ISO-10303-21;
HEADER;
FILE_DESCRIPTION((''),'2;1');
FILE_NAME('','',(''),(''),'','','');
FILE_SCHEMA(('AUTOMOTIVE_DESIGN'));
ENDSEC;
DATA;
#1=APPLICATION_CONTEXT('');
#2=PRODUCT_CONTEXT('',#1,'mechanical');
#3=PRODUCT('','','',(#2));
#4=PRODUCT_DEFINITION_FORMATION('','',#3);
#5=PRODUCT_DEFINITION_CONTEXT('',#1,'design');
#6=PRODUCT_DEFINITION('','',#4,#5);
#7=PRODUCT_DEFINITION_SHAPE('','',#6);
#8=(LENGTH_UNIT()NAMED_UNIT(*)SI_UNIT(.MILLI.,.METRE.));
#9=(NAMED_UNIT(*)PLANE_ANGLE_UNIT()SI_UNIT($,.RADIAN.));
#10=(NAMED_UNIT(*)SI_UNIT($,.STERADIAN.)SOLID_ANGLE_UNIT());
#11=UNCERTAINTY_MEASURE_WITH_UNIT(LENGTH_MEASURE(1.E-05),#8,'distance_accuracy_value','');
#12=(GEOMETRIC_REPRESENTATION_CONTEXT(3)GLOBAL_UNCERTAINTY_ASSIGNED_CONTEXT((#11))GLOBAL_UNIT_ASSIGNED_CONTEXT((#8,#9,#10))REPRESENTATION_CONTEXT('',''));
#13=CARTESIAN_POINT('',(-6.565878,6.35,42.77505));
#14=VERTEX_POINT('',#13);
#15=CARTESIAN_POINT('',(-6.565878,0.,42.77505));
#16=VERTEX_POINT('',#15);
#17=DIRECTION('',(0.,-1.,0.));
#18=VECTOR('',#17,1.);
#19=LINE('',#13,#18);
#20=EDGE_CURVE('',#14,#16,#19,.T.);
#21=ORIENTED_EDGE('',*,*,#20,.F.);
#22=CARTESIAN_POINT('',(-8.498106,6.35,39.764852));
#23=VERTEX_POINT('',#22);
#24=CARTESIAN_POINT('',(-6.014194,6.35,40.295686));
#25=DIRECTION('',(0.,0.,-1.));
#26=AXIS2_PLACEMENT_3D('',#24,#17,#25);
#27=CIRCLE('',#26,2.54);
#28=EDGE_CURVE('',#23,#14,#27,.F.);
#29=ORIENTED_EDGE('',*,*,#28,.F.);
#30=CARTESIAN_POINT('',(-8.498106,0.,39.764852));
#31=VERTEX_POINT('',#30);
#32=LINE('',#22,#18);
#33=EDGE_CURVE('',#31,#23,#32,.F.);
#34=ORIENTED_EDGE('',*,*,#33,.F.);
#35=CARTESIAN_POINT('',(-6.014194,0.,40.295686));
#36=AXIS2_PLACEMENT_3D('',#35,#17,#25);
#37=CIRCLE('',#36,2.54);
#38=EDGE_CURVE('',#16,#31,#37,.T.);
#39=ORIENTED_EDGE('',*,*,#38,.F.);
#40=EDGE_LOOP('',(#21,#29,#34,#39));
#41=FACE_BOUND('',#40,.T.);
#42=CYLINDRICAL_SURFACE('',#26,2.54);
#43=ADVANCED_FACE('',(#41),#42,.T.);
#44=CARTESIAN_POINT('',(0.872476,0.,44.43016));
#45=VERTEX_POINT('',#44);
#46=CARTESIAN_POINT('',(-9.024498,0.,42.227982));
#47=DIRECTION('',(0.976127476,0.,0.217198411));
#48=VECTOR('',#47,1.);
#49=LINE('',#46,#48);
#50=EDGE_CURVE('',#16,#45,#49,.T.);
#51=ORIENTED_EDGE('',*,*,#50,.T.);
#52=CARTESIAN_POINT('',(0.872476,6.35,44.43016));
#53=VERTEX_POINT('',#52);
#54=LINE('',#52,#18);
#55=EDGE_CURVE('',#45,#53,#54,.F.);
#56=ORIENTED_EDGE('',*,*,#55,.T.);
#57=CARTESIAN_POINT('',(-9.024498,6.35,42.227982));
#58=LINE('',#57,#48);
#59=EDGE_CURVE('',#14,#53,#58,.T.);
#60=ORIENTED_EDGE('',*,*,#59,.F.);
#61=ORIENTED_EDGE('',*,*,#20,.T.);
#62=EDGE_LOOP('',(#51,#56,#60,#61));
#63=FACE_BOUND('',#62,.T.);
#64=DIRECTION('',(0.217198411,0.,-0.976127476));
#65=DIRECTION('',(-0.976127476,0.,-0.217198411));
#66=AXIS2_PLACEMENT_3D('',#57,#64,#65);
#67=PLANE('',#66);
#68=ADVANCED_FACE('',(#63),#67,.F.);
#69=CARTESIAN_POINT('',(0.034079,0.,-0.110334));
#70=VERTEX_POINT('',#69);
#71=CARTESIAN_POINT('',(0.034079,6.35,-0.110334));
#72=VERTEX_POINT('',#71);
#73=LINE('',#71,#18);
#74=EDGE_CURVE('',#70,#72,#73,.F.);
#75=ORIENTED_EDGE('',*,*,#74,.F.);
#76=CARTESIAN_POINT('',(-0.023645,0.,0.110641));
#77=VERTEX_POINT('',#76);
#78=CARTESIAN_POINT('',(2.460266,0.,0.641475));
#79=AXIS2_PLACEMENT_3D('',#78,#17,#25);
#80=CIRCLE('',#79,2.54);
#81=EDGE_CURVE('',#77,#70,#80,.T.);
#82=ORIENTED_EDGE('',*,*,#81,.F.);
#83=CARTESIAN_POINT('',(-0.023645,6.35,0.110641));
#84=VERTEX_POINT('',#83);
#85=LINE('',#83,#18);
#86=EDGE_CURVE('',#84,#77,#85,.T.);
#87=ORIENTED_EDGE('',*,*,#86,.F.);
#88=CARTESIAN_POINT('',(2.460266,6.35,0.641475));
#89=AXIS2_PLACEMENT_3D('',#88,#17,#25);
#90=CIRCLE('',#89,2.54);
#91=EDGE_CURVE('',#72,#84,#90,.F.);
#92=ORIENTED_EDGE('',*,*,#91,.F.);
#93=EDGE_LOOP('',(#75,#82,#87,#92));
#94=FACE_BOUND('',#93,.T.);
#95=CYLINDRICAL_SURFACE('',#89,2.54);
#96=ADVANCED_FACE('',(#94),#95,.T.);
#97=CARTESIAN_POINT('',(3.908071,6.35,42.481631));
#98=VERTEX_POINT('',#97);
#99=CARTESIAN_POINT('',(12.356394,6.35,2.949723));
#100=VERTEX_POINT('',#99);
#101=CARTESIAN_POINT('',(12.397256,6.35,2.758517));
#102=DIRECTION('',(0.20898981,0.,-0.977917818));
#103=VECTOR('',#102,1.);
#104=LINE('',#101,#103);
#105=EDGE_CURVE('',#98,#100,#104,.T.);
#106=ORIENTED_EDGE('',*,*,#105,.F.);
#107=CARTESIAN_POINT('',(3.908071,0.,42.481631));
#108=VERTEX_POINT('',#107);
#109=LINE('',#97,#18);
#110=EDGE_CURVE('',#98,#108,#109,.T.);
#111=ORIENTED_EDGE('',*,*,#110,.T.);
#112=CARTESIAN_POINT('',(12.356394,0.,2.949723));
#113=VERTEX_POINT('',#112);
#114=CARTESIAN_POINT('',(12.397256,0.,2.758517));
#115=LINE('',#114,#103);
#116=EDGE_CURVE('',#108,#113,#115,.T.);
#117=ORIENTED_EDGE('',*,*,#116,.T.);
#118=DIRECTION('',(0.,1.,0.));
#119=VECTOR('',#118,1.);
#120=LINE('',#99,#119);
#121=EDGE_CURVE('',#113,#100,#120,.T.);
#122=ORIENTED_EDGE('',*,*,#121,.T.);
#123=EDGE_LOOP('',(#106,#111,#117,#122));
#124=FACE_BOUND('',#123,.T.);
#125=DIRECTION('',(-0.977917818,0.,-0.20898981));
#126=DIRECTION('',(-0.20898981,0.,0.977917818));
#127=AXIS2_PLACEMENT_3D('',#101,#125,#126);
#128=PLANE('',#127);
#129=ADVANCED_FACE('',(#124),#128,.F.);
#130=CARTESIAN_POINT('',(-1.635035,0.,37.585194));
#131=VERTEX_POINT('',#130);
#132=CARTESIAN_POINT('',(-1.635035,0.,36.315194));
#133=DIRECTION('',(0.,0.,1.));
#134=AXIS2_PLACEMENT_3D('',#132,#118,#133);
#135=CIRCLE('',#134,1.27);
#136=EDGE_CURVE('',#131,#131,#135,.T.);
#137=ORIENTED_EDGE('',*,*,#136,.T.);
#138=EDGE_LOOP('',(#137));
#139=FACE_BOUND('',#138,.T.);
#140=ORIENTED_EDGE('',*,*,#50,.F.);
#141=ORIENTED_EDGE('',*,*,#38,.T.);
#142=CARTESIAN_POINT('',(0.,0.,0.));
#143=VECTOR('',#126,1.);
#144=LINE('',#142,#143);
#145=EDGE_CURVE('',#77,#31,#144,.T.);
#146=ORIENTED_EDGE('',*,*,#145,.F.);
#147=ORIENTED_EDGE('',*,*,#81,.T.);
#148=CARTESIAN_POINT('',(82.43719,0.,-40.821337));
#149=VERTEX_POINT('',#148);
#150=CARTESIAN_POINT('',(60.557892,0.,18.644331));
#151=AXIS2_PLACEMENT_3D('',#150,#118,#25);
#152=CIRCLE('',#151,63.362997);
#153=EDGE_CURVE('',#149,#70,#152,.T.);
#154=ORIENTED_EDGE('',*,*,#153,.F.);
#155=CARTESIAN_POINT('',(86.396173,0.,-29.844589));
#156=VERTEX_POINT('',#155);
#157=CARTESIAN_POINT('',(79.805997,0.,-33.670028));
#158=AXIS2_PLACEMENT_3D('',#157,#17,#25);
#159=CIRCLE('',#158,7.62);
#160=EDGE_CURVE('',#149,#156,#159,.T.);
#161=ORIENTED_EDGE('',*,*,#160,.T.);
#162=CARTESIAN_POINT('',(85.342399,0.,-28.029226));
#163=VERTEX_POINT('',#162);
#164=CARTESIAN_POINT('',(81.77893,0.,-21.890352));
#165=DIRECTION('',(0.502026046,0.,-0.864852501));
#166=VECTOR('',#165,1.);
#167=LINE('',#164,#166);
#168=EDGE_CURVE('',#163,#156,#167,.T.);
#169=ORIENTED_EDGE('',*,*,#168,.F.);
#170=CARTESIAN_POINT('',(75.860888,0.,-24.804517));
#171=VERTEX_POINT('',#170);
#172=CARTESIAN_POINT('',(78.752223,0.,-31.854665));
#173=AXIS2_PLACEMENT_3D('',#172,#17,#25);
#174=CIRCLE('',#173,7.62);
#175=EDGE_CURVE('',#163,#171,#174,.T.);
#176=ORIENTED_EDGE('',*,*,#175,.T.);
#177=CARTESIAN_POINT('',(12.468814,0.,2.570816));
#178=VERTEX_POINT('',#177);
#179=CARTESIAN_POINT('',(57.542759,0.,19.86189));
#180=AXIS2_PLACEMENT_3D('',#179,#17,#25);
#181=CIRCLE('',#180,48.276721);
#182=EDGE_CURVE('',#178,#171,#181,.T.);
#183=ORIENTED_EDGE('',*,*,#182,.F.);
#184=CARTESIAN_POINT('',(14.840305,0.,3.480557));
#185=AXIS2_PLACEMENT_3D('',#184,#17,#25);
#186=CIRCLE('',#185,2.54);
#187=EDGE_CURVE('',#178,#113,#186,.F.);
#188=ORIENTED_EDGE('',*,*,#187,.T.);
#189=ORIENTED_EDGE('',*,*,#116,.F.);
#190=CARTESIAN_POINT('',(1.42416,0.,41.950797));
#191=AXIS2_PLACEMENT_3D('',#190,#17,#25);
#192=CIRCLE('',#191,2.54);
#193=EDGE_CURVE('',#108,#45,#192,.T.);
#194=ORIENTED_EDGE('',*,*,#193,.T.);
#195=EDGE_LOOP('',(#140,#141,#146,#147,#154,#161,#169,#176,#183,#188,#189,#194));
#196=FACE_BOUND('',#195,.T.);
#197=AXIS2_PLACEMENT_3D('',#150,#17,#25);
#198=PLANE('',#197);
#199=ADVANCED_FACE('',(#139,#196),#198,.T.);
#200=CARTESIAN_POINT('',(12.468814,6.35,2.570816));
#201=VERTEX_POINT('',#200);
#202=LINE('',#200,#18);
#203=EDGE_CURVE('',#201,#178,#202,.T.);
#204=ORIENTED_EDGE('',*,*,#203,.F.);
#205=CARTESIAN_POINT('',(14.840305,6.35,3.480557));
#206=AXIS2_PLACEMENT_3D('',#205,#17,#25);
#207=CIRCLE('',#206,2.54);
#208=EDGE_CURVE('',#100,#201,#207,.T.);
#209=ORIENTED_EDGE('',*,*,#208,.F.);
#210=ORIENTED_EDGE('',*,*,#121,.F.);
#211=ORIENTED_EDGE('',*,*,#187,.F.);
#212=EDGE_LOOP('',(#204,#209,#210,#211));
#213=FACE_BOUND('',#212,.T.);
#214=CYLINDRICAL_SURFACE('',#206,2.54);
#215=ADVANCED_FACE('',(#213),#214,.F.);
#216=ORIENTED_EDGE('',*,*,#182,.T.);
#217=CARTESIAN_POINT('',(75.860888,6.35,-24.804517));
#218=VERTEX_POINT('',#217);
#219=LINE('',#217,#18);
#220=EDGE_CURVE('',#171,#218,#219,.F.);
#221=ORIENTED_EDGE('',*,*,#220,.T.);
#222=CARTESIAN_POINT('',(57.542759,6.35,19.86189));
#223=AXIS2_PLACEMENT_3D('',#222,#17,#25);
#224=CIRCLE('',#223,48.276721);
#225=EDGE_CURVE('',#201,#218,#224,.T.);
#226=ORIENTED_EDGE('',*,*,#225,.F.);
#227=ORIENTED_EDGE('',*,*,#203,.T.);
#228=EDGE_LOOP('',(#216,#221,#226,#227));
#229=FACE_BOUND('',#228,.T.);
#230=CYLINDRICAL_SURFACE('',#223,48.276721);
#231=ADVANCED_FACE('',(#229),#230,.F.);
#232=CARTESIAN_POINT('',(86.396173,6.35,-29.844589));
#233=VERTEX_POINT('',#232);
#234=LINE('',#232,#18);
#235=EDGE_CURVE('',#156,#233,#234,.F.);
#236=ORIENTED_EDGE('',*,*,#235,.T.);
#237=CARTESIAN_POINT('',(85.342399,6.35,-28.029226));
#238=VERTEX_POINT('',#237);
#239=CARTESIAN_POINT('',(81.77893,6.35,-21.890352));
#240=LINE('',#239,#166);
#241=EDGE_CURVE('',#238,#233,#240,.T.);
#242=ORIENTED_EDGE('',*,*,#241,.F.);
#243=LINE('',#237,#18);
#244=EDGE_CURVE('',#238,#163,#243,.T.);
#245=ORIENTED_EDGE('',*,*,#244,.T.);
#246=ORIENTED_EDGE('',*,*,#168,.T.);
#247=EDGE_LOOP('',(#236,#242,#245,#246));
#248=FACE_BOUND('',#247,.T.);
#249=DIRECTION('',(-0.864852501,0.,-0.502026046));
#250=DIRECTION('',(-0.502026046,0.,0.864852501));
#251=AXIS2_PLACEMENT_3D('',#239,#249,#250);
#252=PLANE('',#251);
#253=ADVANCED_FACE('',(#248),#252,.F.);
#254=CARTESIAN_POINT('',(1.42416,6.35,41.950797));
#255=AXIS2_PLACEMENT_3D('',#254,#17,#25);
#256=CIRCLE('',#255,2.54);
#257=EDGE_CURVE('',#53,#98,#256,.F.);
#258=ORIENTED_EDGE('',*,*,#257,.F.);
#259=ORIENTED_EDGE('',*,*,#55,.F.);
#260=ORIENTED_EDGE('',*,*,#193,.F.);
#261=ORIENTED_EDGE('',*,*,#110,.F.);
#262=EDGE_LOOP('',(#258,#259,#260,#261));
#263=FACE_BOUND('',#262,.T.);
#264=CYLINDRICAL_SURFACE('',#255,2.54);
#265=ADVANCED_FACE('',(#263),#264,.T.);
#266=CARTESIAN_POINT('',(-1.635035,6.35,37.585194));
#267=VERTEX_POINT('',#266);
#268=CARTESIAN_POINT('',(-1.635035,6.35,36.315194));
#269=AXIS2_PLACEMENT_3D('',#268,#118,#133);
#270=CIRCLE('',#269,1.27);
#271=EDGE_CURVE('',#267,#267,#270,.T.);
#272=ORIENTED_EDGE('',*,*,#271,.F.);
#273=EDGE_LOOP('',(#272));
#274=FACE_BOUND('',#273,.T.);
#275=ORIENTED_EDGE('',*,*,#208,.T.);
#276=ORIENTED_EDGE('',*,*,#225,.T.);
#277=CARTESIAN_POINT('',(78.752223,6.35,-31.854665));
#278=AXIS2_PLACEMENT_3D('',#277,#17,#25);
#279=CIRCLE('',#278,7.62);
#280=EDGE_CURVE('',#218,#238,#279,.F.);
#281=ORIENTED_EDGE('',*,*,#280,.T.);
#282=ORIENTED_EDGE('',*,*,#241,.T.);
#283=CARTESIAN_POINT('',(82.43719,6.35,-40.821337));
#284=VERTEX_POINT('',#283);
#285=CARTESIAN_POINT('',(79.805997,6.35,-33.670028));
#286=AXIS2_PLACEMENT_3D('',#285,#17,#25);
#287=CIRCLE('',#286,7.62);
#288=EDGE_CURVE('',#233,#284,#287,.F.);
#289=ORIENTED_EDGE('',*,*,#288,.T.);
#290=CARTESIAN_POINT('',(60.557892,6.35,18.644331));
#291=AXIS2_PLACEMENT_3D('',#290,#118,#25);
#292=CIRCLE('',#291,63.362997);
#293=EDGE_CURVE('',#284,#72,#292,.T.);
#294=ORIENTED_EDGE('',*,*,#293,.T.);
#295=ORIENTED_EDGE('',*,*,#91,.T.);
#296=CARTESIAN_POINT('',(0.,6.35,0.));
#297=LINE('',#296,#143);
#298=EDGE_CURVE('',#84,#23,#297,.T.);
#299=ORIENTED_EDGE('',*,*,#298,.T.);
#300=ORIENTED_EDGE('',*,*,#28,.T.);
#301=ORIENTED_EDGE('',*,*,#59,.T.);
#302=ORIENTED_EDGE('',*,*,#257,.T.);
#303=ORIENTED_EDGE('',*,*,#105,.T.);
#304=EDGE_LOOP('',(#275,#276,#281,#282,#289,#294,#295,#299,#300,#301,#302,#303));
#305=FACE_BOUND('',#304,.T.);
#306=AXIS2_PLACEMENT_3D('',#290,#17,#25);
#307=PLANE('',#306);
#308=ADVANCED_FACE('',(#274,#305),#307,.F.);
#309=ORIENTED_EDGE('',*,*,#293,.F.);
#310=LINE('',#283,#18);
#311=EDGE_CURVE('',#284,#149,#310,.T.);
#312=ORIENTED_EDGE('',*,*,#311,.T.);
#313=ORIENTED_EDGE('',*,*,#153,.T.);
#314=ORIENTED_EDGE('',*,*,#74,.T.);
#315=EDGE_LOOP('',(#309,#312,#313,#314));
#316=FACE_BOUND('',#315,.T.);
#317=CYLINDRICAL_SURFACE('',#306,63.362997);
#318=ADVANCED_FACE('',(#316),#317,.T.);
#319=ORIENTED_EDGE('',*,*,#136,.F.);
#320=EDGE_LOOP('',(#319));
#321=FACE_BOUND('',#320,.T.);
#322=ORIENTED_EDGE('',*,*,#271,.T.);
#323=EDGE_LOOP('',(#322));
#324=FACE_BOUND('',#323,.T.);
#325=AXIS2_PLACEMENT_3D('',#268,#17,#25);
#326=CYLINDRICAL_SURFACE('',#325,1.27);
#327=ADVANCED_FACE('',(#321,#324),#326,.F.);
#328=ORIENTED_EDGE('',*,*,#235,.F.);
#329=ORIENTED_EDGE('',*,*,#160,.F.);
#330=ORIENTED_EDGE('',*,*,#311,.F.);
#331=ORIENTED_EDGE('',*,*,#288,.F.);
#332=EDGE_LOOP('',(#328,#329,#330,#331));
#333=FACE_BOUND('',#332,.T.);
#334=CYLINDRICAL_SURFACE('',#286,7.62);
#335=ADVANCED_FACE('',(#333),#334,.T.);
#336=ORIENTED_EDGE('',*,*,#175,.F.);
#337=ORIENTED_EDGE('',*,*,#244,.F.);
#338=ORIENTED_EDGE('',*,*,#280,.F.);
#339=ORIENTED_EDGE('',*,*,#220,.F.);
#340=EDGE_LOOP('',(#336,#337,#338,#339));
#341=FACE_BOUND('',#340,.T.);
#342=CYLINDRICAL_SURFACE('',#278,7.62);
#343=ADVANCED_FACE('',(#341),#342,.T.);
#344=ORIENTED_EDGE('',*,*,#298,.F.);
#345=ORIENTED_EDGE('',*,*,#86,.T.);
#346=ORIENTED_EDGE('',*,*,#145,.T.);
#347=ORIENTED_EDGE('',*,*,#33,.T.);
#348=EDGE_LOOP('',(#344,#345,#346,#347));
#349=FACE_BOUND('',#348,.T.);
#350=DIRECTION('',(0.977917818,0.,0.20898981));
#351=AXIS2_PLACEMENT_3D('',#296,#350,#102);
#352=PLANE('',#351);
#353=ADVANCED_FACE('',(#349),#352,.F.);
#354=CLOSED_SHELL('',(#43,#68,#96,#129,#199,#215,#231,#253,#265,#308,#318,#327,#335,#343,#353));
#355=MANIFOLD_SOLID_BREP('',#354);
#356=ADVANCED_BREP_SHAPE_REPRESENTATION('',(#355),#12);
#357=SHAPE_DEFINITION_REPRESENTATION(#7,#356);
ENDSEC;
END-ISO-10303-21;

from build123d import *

# Parameters (mm, degrees)
SKETCH1_R           = 1.27
BOSS_EXTRUDE1_DEPTH = 6.35
FILLET1_R           = 7.62
FILLET2_R           = 2.54


with BuildPart() as part:
    # Sketch1 → Boss-Extrude1 (new body)
    with BuildSketch(Plane(origin=(0, 0, 0), x_dir=(1, 0, 0), z_dir=(0, 1, 0))):
        with BuildLine():
            Line((81.778930412, 21.890352424), (90.625383348, 37.130352424))
            ThreePointArc((90.625383348, 37.130352424), (36.535362906, 39.988317454), (0, 0))
            Line((0, 0), (-9.024498495, -42.227981756))
            Line((-9.024498495, -42.227981756), (3.372757994, -44.986498939))
            Line((3.372757994, -44.986498939), (12.397256489, -2.758517182))
            ThreePointArc((12.397256489, -2.758517182), (41.38133196, 25.629318142), (81.778930412, 21.890352424))
        make_face()
        with Locations(Location((-1.635035265, -36.315193683, 0), (0, 0, 270))):
            Circle(SKETCH1_R, mode=Mode.SUBTRACT)
    extrude(amount=BOSS_EXTRUDE1_DEPTH)

    # Fillet1
    fillet1_edges = [part.edges().sort_by_distance(p)[0] for p in [
        (90.625383348, 3.175, -37.130352424),
        (81.778930412, 3.175, -21.890352424),
    ]]
    fillet(fillet1_edges, radius=FILLET1_R)

    # Fillet2
    # the kernel refuses this fillet: 2.54 mm, written as the material it adds along each edge
    with BuildSketch(Plane(origin=(12.397256489, 0, 2.758517182), x_dir=(0.35622264546587595, 0, -0.9344011059803455), z_dir=(0, 1, 0))) as fillet2_piece_1:
        with BuildLine():
            CenterArc((0.195594606, -2.539994503), FILLET2_R, 89.880796264, 8.924440748)
            Line((-0.193218847, -0.029929942), (0, 0))
            ThreePointArc((0, 0), (0.100439533, 0.000104482), (0.200879066, 0))
        make_face()
    extrude(amount=6.35)
    # the kernel refuses this fillet: 2.54 mm, written as the material it takes off along each edge
    with BuildSketch(Plane(origin=(3.372757994, -6.403575534, 44.986498939), x_dir=(0.20898980989256036, 0, -0.9779178183063603), z_dir=(0, 1, 0))) as fillet2_2_piece_1:
        with BuildLine():
            CenterArc((FILLET2_R * 1.00843709196, FILLET2_R), FILLET2_R, 179.518623791, 90.481376209)
            Line((FILLET2_R * 0.00847238518745, FILLET2_R * 1.00840150095), (0, 0))
            Line((0, 0), (FILLET2_R * 1.00843709196, 0))
        make_face()
    extrude(amount=19.157151068, mode=Mode.SUBTRACT)
    with BuildSketch(Plane(origin=(-9.024498495, -6.296872706, 42.227981756), x_dir=(0.20898980989255983, 0, -0.9779178183063605), z_dir=(0, 1, 0))) as fillet2_2_piece_2:
        with BuildLine():
            CenterArc((FILLET2_R * 0.991633497, -FILLET2_R), FILLET2_R, 90, 89.518623791)
            Line((-FILLET2_R * 0.00833120976845, -FILLET2_R * 0.991598499049), (0, 0))
            Line((0, 0), (FILLET2_R * 0.991633497, 0))
        make_face()
    extrude(amount=18.943745412, mode=Mode.SUBTRACT)
    with BuildSketch(Plane(origin=(0, -0.288692893, 0), x_dir=(0.29511712664232287, 0, -0.9554610832275584), z_dir=(0, 1, 0))) as fillet2_2_piece_3:
        with BuildLine():
            CenterArc((0.11316262, -2.539998945), FILLET2_R, 89.947790074, 5.153611753)
            Line((-0.112690792, -0.010060164), (0, 0))
            ThreePointArc((0, 0), (0.057738579, 2.6307e-05), (0.115477157, 0))
        make_face()
    extrude(amount=6.927385787, mode=Mode.SUBTRACT)


solid = part.part
